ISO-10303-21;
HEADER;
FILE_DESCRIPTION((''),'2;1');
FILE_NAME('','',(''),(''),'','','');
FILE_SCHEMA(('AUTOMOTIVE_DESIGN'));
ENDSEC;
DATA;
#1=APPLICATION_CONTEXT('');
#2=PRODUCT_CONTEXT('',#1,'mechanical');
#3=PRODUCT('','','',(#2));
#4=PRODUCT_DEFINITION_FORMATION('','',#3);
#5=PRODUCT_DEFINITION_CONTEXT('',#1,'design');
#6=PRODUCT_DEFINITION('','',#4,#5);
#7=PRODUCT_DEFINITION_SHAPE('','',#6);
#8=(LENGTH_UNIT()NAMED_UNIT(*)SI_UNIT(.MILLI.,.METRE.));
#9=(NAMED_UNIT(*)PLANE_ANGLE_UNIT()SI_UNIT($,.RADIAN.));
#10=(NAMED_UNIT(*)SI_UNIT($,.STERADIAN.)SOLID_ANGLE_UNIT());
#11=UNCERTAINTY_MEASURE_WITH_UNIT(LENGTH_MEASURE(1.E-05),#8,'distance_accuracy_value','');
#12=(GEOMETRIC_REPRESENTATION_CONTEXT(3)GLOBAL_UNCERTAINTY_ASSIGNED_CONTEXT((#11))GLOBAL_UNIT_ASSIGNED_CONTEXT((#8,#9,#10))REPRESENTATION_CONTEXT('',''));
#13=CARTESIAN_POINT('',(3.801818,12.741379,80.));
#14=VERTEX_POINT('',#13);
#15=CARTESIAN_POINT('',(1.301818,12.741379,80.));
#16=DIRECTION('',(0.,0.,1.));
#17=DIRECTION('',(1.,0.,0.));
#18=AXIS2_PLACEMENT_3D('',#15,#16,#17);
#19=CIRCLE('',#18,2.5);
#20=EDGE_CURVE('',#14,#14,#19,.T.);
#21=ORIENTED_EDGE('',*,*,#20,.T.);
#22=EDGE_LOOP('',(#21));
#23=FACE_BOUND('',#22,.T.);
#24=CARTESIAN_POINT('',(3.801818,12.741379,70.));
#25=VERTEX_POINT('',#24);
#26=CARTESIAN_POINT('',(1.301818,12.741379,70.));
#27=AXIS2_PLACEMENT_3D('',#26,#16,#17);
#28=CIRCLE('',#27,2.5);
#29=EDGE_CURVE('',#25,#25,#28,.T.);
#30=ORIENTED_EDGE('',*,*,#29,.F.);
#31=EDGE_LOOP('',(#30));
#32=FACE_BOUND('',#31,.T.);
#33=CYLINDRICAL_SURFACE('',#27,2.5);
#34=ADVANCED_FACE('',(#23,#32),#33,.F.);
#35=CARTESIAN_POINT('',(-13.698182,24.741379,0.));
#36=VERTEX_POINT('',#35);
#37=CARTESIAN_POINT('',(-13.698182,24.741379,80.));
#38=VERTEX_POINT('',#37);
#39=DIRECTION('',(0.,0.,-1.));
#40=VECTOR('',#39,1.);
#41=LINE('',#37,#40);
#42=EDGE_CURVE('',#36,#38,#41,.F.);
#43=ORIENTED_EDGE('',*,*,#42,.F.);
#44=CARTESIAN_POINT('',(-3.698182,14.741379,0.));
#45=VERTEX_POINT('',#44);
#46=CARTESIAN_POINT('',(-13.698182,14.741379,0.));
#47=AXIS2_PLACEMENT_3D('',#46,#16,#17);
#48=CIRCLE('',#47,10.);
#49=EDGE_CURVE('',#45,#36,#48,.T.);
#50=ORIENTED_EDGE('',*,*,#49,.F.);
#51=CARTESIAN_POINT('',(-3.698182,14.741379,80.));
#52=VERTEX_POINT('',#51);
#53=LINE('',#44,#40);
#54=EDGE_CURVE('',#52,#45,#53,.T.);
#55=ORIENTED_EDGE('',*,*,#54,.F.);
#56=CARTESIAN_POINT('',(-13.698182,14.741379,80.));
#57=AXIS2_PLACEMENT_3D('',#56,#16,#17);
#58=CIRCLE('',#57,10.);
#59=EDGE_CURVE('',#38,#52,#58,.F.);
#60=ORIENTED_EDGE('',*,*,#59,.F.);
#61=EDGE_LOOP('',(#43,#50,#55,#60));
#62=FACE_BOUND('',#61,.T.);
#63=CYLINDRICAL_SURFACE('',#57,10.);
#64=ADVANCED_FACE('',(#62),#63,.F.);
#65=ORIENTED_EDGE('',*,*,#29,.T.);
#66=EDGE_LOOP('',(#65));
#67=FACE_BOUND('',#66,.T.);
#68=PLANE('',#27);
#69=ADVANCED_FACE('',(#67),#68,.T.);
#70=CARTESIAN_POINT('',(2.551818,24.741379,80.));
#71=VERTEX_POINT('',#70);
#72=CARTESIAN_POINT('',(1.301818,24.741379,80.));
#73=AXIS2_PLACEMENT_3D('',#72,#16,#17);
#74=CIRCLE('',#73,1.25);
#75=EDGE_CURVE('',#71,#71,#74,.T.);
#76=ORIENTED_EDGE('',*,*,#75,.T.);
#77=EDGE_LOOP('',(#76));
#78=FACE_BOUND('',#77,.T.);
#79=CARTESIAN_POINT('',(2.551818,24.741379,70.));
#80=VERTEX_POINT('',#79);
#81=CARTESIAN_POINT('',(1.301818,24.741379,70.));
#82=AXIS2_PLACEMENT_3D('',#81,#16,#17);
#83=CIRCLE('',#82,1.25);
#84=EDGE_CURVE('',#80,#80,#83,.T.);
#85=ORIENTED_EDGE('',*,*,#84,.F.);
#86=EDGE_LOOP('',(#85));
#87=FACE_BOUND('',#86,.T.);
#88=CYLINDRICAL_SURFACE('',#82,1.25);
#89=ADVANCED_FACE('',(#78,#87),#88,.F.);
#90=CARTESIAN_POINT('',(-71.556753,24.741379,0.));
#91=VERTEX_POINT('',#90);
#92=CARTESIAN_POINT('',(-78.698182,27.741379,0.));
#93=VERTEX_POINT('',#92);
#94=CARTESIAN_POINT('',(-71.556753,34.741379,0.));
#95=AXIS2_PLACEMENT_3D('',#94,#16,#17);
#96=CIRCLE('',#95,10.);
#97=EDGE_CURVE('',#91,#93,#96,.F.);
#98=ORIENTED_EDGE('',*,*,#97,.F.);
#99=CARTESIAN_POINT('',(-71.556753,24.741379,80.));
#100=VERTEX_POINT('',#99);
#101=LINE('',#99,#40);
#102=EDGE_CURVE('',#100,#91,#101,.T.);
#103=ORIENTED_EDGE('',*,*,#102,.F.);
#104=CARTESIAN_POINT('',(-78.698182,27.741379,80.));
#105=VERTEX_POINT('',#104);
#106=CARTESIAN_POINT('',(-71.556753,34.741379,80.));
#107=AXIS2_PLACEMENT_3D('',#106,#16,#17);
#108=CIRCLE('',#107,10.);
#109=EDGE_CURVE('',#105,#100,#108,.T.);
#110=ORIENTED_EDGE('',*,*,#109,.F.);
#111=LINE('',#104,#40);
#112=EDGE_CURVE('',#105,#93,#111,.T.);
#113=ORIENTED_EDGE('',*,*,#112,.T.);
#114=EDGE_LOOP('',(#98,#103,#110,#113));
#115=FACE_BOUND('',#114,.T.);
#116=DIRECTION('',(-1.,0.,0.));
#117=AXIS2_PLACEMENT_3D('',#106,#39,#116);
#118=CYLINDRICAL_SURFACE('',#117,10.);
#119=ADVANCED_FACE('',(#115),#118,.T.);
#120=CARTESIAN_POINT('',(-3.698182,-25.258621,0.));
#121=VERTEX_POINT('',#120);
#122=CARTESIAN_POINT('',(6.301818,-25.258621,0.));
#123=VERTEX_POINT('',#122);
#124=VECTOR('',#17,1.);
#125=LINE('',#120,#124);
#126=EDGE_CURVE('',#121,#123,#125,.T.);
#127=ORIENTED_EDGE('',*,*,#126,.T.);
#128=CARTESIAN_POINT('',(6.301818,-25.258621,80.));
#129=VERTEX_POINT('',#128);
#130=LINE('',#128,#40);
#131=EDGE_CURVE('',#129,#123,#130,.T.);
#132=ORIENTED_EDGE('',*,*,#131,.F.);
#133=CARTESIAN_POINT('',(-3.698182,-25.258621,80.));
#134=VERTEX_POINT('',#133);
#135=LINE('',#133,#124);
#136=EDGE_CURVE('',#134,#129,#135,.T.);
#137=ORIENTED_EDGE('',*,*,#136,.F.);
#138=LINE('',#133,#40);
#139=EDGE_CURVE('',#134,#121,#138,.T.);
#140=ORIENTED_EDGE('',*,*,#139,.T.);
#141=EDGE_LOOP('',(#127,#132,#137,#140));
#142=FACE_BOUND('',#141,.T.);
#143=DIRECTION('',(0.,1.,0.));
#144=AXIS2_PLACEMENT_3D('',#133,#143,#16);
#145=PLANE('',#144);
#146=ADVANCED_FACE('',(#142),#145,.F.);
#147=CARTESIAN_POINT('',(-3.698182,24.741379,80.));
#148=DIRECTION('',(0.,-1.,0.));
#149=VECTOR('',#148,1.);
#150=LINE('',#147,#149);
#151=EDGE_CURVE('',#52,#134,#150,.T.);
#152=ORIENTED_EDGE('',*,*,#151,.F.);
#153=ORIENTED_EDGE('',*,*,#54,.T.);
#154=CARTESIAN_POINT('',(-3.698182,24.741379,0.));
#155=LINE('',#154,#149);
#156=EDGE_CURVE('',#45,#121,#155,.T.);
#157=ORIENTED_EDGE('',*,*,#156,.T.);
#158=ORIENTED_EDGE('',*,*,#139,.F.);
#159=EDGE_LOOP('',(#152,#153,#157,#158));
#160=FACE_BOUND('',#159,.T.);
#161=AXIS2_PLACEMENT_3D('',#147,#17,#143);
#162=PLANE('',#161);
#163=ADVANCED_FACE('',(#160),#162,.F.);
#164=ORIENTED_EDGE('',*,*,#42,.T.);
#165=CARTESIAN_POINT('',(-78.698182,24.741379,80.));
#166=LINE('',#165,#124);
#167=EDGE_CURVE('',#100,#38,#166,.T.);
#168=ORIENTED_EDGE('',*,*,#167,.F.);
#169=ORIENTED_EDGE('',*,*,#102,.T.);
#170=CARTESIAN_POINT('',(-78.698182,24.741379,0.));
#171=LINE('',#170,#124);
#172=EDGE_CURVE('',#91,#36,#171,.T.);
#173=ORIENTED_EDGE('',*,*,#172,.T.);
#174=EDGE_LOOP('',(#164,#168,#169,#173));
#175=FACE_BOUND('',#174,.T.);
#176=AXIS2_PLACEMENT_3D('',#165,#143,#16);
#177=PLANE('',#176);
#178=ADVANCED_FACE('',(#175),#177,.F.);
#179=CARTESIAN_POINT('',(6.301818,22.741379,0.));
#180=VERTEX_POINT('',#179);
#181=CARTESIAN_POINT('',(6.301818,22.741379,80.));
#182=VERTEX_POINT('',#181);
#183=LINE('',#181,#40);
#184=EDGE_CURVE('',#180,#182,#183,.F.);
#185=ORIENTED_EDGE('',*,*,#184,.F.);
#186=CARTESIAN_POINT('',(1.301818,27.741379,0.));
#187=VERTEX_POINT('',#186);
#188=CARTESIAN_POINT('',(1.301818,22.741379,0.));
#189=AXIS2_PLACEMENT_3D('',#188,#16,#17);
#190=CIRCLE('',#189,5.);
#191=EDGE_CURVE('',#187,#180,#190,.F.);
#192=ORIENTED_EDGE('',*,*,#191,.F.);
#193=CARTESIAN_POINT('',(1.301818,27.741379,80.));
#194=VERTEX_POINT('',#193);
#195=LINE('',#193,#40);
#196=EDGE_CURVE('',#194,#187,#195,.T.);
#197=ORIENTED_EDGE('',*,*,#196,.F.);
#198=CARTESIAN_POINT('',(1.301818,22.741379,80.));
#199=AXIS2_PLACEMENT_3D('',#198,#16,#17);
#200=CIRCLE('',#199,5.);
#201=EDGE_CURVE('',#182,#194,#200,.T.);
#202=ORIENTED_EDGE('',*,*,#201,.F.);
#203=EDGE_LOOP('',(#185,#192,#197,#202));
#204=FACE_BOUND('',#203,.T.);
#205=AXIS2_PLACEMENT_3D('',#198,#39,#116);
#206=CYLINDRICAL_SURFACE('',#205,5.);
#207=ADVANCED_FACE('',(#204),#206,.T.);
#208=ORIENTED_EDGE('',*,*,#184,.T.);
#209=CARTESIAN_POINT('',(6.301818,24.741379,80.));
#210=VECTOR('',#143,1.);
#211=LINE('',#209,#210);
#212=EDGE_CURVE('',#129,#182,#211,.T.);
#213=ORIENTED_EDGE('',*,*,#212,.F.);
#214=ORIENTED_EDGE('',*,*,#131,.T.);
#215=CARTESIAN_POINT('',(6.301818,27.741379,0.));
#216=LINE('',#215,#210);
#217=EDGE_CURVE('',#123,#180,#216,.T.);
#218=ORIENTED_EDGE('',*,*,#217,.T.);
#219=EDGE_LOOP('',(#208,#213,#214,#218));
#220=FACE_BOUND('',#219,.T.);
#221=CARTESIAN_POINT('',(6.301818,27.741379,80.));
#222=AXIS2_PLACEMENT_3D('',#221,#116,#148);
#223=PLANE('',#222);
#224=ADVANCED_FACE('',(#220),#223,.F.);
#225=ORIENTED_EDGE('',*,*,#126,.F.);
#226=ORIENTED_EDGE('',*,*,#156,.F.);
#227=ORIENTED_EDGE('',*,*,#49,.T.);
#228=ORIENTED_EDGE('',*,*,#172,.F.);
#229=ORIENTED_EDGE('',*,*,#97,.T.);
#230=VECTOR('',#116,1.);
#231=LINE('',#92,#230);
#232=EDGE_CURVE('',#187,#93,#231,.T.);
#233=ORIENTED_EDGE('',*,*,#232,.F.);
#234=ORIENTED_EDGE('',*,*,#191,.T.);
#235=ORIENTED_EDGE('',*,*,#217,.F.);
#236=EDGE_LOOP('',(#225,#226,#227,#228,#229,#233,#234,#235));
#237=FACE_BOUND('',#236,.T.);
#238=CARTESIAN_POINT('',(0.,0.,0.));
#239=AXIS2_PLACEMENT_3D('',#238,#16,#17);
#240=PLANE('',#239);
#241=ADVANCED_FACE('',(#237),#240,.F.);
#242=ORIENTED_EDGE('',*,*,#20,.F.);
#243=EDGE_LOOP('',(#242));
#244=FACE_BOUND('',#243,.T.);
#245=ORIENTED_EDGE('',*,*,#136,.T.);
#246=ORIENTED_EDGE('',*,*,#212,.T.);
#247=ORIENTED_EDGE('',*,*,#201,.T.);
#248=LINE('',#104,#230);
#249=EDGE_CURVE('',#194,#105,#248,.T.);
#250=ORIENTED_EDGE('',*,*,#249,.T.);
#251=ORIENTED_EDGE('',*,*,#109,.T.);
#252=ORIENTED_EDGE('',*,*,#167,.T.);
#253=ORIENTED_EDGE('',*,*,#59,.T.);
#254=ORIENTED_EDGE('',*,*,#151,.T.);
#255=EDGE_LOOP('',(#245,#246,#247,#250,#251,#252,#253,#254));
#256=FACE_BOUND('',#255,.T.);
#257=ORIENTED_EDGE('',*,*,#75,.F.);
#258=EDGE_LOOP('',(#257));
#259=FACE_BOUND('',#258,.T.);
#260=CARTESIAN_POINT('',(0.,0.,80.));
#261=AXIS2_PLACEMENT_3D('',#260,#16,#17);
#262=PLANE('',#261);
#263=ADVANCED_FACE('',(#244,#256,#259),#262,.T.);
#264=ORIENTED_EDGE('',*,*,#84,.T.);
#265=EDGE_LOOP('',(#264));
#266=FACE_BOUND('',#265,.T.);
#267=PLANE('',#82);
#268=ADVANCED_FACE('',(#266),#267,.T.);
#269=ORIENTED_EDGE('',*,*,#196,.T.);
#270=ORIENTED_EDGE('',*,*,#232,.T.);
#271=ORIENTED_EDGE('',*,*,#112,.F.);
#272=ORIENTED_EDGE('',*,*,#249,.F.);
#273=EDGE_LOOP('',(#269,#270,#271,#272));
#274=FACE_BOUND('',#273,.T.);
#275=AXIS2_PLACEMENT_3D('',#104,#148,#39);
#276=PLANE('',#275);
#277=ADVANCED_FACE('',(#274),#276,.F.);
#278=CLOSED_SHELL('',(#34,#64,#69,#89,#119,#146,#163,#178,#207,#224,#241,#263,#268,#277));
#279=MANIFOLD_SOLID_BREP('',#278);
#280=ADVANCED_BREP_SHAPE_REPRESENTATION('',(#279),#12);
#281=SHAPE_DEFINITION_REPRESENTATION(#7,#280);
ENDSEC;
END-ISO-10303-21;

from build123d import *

# Parameters (mm, degrees)
RESSALTO_EXTRUS_O1_DEPTH = 80
ESBO_O3_R                = 2.5
CORTE_EXTRUS_O2_DEPTH    = 10
ESBO_O4_R                = 1.25
CORTE_EXTRUS_O3_DEPTH    = 10
FILETE1_R                = 10
FILETE2_R                = 5
FILETE3_R                = 10


with BuildPart() as part:
    # Esboço1 → Ressalto-extrusão1 (new body)
    with BuildSketch(Plane.XY):
        Polygon((-78.698181647, 27.74137931), (6.301818353, 27.74137931), (6.301818353, 24.74137931), (6.301818353, -25.25862069), (-3.698181647, -25.25862069), (-3.698181647, 24.74137931), (-78.698181647, 24.74137931), align=None)
    extrude(amount=RESSALTO_EXTRUS_O1_DEPTH)

    # Esboço3 → Corte-extrusão2 (cut)
    with BuildSketch(Plane.XY.offset(80)):
        with Locations((1.301818353, 12.74137931)):
            Circle(ESBO_O3_R)
    extrude(amount=-CORTE_EXTRUS_O2_DEPTH, mode=Mode.SUBTRACT)

    # Esboço4 → Corte-extrusão3 (cut)
    with BuildSketch(Plane.XY.offset(80)):
        with Locations((1.301818353, 24.74137931)):
            Circle(ESBO_O4_R)
    extrude(amount=-CORTE_EXTRUS_O3_DEPTH, mode=Mode.SUBTRACT)

    # Filete1
    filete1_edges = [part.edges().sort_by_distance(p)[0] for p in [
        (-3.698181647, 24.74137931, 40),
    ]]
    fillet(filete1_edges, radius=FILETE1_R)

    # Filete2
    filete2_edges = [part.edges().sort_by_distance(p)[0] for p in [
        (6.301818353, 27.74137931, 40),
    ]]
    fillet(filete2_edges, radius=FILETE2_R)

    # Filete3
    # the kernel refuses this fillet: 10 mm, written as the material it takes off along each edge
    with BuildSketch(Plane(origin=(-78.698181647, 24.74137931, -17.853571071), x_dir=(0, 1, 0), z_dir=(0, 0, 1))) as filete3_piece_1:
        with BuildLine():
            CenterArc((10, -7.141428429), FILETE3_R, 134.427004001, 45.572995999)
            Line((0, -7.141428429), (-0.2, -7.141428429))
            Line((-0.2, -7.141428429), (-0.2, 0))
            Line((-0.2, 0), (0, 0.2))
            ThreePointArc((0, 0.2), (1.5, 0.2), (2.86, 0.142828569))
            Line((2.86, 0.142828569), (3, 0))
        make_face()
    extrude(amount=115.707142143, mode=Mode.SUBTRACT)


solid = part.part
